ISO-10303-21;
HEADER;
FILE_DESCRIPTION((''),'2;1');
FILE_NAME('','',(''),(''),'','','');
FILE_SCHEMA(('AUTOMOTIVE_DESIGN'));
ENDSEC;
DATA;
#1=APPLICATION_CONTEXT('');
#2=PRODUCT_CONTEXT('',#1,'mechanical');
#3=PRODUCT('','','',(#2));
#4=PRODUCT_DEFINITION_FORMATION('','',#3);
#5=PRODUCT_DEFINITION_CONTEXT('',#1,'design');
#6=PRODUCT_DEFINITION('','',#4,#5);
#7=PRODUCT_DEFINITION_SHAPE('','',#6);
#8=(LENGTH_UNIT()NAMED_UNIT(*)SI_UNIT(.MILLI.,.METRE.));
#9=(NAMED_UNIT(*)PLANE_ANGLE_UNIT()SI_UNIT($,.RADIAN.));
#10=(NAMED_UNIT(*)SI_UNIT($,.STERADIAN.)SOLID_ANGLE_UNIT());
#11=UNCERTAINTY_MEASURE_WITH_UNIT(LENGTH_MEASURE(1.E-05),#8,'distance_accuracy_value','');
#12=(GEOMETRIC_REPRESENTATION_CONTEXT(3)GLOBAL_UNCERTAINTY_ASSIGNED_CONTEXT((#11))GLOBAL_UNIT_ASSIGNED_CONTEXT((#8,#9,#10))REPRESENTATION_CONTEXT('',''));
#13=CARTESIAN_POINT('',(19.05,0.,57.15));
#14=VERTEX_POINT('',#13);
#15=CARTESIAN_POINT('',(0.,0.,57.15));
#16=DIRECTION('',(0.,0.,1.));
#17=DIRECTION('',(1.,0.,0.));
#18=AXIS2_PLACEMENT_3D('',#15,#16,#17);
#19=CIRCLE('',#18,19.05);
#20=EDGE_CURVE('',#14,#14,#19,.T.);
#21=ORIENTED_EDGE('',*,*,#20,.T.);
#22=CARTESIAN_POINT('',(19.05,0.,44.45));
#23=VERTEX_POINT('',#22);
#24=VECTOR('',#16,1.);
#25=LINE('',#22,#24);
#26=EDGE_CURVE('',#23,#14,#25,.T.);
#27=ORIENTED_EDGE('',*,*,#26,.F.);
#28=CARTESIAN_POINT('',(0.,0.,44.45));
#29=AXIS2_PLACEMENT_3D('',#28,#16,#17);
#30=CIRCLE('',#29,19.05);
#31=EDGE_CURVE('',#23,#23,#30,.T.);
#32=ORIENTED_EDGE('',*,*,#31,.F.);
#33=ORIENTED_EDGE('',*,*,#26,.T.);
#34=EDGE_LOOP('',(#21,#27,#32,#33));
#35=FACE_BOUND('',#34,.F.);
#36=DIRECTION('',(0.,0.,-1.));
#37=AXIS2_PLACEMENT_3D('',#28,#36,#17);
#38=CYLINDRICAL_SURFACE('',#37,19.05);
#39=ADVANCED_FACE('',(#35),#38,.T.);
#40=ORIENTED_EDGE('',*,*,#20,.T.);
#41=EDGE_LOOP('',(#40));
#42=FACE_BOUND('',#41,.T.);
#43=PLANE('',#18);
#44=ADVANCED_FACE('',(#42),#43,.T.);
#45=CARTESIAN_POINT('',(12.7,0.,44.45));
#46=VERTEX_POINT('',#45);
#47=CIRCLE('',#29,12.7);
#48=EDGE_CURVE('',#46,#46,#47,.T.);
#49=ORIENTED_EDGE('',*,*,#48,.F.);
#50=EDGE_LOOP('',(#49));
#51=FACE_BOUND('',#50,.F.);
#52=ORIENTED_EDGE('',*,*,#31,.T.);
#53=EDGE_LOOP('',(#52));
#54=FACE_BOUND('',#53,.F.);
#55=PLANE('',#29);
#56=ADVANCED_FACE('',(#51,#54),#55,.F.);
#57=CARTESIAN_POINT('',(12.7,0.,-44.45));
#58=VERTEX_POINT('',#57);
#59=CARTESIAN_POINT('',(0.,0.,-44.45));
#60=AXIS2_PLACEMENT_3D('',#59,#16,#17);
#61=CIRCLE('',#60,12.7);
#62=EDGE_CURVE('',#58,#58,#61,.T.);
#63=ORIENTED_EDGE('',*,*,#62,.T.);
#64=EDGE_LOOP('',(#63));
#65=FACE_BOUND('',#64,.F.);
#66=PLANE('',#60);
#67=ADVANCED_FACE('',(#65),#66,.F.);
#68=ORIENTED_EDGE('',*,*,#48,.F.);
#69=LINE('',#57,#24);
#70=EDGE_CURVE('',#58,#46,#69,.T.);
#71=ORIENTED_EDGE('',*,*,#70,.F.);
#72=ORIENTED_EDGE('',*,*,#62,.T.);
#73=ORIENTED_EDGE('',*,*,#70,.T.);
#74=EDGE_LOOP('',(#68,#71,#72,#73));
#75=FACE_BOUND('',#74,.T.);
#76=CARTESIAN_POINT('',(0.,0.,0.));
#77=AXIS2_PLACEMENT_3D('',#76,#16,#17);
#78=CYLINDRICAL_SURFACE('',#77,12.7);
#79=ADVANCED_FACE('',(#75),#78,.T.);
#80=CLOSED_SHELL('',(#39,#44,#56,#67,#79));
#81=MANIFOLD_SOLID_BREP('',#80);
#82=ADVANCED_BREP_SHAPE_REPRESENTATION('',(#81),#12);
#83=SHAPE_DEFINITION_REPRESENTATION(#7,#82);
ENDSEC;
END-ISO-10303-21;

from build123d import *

# Parameters (mm, degrees)
F2_R     = 12.7
F3_DEPTH = 44.45
F4_R     = 19.05
F5_DEPTH = 12.7


# Not quite as in the source:
# - a variable given as a bare number and used for a length is read in inches; the dataset says mm whatever the document's units were


with BuildPart() as f3:
    # F2 (on Top) → F3 (new body, symmetric)
    with BuildSketch(Plane.XY):
        Circle(F2_R)
    extrude(amount=F3_DEPTH, both=True)

    # F4 (on face) → F5 (join)
    with BuildSketch(Plane.XY.offset(44.45)):
        Circle(F4_R)
    extrude(amount=F5_DEPTH)


solid = f3.part
